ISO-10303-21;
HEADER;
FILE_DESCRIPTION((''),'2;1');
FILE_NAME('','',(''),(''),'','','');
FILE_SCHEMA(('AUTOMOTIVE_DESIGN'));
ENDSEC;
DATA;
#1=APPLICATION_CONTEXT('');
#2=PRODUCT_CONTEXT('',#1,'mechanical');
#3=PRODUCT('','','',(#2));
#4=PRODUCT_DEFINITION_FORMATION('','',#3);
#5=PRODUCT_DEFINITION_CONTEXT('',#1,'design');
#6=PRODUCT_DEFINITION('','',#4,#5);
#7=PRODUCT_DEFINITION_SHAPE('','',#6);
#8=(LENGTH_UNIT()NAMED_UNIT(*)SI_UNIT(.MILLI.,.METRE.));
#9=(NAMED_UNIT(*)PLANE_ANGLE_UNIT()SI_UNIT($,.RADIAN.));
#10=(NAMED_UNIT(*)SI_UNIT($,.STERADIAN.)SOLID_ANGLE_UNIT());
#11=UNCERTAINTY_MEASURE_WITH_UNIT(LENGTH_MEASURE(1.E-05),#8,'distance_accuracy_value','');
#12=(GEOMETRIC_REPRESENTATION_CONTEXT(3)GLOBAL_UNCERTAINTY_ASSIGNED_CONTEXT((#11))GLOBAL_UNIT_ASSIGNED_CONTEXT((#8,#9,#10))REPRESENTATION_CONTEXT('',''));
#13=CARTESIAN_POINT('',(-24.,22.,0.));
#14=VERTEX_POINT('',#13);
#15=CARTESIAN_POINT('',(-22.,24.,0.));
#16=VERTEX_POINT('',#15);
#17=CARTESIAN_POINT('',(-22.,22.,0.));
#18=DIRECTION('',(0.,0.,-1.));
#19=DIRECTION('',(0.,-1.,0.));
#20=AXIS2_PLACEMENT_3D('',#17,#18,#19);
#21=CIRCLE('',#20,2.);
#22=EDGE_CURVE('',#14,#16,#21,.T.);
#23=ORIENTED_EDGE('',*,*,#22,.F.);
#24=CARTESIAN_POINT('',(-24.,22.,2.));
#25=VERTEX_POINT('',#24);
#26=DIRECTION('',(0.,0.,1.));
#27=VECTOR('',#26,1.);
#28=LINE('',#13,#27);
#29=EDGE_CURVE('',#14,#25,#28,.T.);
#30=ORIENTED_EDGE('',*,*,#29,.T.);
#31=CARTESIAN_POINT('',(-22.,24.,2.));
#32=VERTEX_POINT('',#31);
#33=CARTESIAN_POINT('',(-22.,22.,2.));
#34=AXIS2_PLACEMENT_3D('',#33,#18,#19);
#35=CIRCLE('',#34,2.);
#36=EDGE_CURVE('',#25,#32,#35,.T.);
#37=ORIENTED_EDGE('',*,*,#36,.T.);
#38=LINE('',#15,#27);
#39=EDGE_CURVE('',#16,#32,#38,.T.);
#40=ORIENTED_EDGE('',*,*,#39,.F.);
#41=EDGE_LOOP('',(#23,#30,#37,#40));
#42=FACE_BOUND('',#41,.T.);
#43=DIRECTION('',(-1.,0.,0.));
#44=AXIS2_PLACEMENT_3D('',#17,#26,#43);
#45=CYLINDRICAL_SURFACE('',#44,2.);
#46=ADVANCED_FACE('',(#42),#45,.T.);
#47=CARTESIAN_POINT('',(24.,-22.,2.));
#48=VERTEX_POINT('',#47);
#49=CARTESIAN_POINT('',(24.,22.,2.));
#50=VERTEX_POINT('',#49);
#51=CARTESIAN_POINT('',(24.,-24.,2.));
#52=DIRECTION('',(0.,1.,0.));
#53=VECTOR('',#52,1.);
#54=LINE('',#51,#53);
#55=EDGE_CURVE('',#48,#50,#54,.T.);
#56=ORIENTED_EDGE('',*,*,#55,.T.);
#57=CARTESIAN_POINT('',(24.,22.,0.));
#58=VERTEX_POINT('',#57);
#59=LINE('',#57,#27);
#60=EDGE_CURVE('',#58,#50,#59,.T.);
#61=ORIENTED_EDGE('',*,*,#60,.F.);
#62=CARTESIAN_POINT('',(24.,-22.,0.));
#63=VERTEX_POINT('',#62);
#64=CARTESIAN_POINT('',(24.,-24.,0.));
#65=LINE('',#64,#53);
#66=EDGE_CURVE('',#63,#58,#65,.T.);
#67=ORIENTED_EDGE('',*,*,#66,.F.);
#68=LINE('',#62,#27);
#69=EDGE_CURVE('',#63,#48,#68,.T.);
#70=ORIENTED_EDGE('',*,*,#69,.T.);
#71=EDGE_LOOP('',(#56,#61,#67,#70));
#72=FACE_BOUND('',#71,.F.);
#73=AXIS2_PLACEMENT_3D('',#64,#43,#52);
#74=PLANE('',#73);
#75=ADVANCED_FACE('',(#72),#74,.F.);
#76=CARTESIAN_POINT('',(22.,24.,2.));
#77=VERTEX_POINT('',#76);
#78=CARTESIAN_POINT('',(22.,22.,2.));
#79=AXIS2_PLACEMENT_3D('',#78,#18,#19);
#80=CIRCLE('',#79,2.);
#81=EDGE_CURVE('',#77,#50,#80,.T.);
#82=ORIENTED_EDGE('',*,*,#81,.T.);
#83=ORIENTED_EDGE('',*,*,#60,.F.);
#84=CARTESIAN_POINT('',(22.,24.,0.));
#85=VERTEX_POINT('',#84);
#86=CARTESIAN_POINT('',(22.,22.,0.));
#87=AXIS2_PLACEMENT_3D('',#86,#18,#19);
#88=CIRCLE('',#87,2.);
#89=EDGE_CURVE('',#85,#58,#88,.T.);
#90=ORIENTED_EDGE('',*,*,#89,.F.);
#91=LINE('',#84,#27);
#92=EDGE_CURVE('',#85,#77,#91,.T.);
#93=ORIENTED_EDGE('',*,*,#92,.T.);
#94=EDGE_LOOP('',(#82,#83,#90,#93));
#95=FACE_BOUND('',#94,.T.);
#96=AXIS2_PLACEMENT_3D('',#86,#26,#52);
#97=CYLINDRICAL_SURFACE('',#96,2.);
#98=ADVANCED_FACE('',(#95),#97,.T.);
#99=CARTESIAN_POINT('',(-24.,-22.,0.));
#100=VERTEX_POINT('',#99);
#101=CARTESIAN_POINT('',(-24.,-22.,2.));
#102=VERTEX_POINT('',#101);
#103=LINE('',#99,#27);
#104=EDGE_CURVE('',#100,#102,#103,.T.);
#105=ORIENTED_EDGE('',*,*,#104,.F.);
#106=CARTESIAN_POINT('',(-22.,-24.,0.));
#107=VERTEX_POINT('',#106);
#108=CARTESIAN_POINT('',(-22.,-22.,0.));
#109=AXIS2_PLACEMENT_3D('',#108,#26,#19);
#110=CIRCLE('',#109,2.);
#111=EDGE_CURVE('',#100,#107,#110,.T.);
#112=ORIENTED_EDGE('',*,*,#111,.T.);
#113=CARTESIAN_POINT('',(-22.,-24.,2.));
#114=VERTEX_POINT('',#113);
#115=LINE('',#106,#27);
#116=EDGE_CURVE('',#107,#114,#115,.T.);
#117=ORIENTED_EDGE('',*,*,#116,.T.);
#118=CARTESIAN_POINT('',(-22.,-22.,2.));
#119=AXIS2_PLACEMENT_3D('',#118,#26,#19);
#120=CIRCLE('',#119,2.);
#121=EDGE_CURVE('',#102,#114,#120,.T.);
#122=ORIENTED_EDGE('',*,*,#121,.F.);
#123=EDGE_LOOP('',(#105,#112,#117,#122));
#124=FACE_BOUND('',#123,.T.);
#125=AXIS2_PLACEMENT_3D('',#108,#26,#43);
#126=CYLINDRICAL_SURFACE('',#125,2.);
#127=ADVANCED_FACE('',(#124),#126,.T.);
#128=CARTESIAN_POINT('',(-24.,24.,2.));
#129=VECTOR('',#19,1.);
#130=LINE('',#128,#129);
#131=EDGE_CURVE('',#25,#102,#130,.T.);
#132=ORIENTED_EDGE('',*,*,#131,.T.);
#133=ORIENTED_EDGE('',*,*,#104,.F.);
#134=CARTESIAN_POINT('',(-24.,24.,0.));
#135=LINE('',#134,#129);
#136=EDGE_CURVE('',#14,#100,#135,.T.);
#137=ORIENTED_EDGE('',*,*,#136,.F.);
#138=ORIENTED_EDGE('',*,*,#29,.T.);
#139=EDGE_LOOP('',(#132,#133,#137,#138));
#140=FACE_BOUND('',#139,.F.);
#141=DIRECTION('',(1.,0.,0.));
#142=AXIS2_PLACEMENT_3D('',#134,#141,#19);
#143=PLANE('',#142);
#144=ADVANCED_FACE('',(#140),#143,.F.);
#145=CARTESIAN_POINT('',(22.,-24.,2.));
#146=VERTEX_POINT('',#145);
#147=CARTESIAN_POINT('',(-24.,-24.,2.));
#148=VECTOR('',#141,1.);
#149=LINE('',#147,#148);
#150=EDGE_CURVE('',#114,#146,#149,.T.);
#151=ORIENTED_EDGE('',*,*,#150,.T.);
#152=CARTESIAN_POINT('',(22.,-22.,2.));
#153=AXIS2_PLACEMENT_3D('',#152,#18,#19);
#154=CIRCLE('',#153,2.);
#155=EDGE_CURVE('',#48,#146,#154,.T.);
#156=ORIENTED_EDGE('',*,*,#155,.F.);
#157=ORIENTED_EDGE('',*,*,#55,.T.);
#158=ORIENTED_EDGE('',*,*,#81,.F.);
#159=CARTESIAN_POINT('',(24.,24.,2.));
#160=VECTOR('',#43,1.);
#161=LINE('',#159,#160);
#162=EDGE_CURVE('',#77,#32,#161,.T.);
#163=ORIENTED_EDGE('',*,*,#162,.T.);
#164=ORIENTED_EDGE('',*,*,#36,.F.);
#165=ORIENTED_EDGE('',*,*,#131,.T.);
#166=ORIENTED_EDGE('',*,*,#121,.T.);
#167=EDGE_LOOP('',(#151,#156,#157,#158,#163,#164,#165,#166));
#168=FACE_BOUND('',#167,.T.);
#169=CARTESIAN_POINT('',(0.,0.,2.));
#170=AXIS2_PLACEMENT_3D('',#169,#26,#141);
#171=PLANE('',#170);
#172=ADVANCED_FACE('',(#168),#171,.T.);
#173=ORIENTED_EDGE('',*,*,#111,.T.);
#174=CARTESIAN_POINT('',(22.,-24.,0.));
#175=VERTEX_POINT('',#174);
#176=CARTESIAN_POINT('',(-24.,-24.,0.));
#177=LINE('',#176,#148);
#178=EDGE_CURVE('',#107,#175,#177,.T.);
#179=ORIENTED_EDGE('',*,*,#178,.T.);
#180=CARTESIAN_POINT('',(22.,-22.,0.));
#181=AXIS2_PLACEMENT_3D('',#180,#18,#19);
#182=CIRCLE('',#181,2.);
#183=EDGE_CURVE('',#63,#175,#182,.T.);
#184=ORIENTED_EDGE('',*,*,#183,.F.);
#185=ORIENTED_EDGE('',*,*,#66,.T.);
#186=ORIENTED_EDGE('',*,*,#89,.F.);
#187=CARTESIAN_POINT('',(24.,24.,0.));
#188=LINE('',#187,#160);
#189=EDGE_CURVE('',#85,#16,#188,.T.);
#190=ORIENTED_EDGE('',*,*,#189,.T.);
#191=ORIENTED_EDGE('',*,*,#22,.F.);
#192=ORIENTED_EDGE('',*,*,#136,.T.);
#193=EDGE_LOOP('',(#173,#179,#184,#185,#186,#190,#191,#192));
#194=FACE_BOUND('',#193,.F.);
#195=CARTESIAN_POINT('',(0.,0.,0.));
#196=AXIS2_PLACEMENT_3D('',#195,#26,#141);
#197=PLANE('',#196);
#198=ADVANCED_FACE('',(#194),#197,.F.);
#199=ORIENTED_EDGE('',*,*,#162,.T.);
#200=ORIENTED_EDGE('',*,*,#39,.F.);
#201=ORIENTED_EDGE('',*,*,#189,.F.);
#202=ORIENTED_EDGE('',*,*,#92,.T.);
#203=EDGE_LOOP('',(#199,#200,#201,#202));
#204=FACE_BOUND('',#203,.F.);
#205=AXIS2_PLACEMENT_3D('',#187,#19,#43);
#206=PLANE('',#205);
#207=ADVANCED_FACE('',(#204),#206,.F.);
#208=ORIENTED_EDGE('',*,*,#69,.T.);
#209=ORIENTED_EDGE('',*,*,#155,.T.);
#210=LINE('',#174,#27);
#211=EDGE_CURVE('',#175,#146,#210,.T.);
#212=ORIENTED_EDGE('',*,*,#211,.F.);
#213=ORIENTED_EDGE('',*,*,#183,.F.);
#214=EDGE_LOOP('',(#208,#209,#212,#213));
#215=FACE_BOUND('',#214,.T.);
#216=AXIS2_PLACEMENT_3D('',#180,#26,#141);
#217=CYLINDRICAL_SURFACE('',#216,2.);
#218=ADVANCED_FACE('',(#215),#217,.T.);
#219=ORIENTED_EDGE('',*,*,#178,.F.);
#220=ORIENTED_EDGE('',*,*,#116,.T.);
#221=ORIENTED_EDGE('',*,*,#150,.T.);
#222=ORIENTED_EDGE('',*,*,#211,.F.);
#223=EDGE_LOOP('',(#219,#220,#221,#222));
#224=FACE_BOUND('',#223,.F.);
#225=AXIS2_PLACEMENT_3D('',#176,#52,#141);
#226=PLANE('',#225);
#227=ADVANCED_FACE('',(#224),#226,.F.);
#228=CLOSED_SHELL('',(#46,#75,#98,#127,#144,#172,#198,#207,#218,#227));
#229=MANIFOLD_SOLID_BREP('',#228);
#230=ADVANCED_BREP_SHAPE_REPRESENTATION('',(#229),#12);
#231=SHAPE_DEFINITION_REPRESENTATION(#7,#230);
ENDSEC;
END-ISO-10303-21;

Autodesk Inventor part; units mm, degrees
ref_plane "YZ Plane" through (0, 0, 0) normal (1, 0, 0) x (0, 1, 0)
ref_plane "XZ Plane" through (0, 0, 0) normal (0, 1, 0) x (-1, 0, 0)
ref_plane "XY Plane" through (0, 0, 0) normal (0, 0, 1) x (1, 0, 0)
sketch "Sketch1" plane through (0, 0, 0) normal (0, 0, 1) x (1, 0, 0)
  line L0 (-24, -24) -> (24, -24)
  line L1 (24, -24) -> (24, 24)
  line L2 (24, 24) -> (-24, 24)
  line L3 (-24, 24) -> (-24, -24)
  line L4 (-24, -24) -> (24, 24) construction
  line L5 (24, -24) -> (-24, 24) construction
  point P0 (0, 0)
  dimension "d154" = 48
  dimension "d155" = 48
extrude "Plate5" add sketch "Sketch1" along normal blind 2
fillet "Corner Round1" radius 2 4 edges at (24, 24, 1) (-24, 24, 1) (-24, -24, 1) (24, -24, 1)
properties part number "TKS 3532 FDS way cup" material "Stainless Steel"
